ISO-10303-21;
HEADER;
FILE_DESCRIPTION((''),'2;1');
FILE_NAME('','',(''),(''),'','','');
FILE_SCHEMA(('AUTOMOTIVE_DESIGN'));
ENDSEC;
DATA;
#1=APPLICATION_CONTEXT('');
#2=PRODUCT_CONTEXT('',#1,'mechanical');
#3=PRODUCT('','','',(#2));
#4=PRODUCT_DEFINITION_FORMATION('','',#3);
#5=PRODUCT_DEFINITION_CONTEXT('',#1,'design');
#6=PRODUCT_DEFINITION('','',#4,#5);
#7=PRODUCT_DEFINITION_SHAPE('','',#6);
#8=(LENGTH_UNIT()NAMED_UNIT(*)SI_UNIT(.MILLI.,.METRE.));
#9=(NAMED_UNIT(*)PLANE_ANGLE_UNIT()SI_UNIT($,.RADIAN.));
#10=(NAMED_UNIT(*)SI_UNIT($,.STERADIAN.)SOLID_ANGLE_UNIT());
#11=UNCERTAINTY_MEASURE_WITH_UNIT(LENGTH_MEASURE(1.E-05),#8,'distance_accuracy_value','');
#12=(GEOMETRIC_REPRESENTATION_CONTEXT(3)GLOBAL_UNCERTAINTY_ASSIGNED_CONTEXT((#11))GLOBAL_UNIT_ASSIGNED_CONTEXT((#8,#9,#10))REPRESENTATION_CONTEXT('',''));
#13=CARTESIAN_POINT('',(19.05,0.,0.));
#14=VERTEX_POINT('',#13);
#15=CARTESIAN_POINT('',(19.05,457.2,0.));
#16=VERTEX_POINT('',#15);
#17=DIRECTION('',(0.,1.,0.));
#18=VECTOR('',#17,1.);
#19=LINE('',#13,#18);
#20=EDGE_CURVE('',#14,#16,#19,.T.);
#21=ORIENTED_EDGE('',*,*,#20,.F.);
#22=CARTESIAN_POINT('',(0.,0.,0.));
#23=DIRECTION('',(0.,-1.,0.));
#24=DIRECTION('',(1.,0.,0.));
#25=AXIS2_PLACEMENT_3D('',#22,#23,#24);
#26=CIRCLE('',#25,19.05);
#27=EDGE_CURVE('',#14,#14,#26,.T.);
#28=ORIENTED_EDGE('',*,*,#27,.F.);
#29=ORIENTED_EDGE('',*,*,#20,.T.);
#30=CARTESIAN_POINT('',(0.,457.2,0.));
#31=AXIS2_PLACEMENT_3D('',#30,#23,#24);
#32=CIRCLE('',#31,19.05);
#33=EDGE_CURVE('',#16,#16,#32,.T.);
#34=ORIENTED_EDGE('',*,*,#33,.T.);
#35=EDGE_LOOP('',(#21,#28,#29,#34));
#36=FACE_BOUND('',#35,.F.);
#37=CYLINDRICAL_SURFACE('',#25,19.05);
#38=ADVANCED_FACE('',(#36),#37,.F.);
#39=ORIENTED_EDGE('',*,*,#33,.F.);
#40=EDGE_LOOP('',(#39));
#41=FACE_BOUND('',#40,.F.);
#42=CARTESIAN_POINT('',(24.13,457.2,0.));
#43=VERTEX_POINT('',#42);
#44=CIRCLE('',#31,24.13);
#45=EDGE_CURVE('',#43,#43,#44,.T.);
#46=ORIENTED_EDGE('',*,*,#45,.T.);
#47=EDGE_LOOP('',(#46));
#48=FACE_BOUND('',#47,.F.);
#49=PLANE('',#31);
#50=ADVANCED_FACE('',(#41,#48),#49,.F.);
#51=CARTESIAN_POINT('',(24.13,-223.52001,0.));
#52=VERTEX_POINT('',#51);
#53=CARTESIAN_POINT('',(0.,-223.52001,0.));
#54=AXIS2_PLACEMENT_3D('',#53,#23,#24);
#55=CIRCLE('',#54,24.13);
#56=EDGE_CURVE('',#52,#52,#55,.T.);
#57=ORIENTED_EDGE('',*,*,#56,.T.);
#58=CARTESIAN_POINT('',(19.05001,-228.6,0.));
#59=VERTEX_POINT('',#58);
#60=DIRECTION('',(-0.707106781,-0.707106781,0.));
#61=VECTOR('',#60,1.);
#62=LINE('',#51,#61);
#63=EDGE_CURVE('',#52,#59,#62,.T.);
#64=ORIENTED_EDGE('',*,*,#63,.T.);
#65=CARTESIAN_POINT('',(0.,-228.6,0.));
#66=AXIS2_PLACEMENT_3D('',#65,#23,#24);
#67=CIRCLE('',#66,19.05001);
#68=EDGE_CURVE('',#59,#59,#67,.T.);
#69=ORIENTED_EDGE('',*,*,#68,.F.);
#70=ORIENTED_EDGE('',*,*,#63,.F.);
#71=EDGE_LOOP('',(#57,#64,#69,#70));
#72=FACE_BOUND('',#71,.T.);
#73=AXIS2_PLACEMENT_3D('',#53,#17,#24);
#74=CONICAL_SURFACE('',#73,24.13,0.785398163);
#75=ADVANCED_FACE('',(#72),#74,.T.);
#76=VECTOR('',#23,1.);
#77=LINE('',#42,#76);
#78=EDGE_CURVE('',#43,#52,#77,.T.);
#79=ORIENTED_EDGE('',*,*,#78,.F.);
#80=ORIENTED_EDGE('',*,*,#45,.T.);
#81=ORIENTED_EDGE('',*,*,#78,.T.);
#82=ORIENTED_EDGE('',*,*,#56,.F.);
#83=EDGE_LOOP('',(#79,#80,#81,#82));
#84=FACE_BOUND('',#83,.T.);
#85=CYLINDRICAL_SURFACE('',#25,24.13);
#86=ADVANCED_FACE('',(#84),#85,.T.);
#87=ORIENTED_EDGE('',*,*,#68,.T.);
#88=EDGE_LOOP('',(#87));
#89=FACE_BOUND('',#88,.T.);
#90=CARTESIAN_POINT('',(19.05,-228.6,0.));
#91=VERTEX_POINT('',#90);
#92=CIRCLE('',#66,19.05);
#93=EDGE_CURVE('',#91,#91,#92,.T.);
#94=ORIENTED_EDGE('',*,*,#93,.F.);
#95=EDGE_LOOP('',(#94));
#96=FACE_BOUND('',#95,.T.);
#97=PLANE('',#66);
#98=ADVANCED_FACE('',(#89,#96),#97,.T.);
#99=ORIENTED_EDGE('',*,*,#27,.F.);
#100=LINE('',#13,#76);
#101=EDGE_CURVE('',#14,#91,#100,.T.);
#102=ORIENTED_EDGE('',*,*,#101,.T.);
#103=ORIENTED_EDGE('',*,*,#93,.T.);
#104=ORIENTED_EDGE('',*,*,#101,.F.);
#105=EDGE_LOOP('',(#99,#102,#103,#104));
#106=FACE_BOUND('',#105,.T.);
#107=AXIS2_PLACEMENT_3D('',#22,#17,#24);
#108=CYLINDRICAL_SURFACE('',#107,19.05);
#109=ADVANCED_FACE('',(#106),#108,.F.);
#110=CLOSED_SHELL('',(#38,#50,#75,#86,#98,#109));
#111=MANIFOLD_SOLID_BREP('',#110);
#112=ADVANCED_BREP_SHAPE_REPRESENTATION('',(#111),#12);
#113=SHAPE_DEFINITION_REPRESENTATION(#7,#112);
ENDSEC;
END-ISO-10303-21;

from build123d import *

# Parameters (mm, degrees)
F0_R          = 24.13
F0_R_2        = 19.05
F1_DEPTH      = 228.6
F1_DEPTH_BACK = 457.2
F2_SIZE       = 5.07999


# Not quite as in the source:
# - a fillet or chamfer is up to 0.001 mm smaller than in the source, because OpenCascade refuses the exact size


with BuildPart() as f1:
    # F0 (on Front) → F1 (new body, two sides)
    with BuildSketch(Plane.XZ) as f1_sk:
        Circle(F0_R)
        Circle(F0_R_2, mode=Mode.SUBTRACT)
    extrude(amount=F1_DEPTH)
    extrude(f1_sk.sketch, amount=-F1_DEPTH_BACK)

    # F2 (size 5.08 in the source; OpenCascade refuses exactly that, so slightly less here)
    f2_edges = [f1.edges().sort_by_distance(p)[0] for p in [
        (-24.13, -228.6, 0),
    ]]
    chamfer(f2_edges, length=F2_SIZE)


solid = f1.part
